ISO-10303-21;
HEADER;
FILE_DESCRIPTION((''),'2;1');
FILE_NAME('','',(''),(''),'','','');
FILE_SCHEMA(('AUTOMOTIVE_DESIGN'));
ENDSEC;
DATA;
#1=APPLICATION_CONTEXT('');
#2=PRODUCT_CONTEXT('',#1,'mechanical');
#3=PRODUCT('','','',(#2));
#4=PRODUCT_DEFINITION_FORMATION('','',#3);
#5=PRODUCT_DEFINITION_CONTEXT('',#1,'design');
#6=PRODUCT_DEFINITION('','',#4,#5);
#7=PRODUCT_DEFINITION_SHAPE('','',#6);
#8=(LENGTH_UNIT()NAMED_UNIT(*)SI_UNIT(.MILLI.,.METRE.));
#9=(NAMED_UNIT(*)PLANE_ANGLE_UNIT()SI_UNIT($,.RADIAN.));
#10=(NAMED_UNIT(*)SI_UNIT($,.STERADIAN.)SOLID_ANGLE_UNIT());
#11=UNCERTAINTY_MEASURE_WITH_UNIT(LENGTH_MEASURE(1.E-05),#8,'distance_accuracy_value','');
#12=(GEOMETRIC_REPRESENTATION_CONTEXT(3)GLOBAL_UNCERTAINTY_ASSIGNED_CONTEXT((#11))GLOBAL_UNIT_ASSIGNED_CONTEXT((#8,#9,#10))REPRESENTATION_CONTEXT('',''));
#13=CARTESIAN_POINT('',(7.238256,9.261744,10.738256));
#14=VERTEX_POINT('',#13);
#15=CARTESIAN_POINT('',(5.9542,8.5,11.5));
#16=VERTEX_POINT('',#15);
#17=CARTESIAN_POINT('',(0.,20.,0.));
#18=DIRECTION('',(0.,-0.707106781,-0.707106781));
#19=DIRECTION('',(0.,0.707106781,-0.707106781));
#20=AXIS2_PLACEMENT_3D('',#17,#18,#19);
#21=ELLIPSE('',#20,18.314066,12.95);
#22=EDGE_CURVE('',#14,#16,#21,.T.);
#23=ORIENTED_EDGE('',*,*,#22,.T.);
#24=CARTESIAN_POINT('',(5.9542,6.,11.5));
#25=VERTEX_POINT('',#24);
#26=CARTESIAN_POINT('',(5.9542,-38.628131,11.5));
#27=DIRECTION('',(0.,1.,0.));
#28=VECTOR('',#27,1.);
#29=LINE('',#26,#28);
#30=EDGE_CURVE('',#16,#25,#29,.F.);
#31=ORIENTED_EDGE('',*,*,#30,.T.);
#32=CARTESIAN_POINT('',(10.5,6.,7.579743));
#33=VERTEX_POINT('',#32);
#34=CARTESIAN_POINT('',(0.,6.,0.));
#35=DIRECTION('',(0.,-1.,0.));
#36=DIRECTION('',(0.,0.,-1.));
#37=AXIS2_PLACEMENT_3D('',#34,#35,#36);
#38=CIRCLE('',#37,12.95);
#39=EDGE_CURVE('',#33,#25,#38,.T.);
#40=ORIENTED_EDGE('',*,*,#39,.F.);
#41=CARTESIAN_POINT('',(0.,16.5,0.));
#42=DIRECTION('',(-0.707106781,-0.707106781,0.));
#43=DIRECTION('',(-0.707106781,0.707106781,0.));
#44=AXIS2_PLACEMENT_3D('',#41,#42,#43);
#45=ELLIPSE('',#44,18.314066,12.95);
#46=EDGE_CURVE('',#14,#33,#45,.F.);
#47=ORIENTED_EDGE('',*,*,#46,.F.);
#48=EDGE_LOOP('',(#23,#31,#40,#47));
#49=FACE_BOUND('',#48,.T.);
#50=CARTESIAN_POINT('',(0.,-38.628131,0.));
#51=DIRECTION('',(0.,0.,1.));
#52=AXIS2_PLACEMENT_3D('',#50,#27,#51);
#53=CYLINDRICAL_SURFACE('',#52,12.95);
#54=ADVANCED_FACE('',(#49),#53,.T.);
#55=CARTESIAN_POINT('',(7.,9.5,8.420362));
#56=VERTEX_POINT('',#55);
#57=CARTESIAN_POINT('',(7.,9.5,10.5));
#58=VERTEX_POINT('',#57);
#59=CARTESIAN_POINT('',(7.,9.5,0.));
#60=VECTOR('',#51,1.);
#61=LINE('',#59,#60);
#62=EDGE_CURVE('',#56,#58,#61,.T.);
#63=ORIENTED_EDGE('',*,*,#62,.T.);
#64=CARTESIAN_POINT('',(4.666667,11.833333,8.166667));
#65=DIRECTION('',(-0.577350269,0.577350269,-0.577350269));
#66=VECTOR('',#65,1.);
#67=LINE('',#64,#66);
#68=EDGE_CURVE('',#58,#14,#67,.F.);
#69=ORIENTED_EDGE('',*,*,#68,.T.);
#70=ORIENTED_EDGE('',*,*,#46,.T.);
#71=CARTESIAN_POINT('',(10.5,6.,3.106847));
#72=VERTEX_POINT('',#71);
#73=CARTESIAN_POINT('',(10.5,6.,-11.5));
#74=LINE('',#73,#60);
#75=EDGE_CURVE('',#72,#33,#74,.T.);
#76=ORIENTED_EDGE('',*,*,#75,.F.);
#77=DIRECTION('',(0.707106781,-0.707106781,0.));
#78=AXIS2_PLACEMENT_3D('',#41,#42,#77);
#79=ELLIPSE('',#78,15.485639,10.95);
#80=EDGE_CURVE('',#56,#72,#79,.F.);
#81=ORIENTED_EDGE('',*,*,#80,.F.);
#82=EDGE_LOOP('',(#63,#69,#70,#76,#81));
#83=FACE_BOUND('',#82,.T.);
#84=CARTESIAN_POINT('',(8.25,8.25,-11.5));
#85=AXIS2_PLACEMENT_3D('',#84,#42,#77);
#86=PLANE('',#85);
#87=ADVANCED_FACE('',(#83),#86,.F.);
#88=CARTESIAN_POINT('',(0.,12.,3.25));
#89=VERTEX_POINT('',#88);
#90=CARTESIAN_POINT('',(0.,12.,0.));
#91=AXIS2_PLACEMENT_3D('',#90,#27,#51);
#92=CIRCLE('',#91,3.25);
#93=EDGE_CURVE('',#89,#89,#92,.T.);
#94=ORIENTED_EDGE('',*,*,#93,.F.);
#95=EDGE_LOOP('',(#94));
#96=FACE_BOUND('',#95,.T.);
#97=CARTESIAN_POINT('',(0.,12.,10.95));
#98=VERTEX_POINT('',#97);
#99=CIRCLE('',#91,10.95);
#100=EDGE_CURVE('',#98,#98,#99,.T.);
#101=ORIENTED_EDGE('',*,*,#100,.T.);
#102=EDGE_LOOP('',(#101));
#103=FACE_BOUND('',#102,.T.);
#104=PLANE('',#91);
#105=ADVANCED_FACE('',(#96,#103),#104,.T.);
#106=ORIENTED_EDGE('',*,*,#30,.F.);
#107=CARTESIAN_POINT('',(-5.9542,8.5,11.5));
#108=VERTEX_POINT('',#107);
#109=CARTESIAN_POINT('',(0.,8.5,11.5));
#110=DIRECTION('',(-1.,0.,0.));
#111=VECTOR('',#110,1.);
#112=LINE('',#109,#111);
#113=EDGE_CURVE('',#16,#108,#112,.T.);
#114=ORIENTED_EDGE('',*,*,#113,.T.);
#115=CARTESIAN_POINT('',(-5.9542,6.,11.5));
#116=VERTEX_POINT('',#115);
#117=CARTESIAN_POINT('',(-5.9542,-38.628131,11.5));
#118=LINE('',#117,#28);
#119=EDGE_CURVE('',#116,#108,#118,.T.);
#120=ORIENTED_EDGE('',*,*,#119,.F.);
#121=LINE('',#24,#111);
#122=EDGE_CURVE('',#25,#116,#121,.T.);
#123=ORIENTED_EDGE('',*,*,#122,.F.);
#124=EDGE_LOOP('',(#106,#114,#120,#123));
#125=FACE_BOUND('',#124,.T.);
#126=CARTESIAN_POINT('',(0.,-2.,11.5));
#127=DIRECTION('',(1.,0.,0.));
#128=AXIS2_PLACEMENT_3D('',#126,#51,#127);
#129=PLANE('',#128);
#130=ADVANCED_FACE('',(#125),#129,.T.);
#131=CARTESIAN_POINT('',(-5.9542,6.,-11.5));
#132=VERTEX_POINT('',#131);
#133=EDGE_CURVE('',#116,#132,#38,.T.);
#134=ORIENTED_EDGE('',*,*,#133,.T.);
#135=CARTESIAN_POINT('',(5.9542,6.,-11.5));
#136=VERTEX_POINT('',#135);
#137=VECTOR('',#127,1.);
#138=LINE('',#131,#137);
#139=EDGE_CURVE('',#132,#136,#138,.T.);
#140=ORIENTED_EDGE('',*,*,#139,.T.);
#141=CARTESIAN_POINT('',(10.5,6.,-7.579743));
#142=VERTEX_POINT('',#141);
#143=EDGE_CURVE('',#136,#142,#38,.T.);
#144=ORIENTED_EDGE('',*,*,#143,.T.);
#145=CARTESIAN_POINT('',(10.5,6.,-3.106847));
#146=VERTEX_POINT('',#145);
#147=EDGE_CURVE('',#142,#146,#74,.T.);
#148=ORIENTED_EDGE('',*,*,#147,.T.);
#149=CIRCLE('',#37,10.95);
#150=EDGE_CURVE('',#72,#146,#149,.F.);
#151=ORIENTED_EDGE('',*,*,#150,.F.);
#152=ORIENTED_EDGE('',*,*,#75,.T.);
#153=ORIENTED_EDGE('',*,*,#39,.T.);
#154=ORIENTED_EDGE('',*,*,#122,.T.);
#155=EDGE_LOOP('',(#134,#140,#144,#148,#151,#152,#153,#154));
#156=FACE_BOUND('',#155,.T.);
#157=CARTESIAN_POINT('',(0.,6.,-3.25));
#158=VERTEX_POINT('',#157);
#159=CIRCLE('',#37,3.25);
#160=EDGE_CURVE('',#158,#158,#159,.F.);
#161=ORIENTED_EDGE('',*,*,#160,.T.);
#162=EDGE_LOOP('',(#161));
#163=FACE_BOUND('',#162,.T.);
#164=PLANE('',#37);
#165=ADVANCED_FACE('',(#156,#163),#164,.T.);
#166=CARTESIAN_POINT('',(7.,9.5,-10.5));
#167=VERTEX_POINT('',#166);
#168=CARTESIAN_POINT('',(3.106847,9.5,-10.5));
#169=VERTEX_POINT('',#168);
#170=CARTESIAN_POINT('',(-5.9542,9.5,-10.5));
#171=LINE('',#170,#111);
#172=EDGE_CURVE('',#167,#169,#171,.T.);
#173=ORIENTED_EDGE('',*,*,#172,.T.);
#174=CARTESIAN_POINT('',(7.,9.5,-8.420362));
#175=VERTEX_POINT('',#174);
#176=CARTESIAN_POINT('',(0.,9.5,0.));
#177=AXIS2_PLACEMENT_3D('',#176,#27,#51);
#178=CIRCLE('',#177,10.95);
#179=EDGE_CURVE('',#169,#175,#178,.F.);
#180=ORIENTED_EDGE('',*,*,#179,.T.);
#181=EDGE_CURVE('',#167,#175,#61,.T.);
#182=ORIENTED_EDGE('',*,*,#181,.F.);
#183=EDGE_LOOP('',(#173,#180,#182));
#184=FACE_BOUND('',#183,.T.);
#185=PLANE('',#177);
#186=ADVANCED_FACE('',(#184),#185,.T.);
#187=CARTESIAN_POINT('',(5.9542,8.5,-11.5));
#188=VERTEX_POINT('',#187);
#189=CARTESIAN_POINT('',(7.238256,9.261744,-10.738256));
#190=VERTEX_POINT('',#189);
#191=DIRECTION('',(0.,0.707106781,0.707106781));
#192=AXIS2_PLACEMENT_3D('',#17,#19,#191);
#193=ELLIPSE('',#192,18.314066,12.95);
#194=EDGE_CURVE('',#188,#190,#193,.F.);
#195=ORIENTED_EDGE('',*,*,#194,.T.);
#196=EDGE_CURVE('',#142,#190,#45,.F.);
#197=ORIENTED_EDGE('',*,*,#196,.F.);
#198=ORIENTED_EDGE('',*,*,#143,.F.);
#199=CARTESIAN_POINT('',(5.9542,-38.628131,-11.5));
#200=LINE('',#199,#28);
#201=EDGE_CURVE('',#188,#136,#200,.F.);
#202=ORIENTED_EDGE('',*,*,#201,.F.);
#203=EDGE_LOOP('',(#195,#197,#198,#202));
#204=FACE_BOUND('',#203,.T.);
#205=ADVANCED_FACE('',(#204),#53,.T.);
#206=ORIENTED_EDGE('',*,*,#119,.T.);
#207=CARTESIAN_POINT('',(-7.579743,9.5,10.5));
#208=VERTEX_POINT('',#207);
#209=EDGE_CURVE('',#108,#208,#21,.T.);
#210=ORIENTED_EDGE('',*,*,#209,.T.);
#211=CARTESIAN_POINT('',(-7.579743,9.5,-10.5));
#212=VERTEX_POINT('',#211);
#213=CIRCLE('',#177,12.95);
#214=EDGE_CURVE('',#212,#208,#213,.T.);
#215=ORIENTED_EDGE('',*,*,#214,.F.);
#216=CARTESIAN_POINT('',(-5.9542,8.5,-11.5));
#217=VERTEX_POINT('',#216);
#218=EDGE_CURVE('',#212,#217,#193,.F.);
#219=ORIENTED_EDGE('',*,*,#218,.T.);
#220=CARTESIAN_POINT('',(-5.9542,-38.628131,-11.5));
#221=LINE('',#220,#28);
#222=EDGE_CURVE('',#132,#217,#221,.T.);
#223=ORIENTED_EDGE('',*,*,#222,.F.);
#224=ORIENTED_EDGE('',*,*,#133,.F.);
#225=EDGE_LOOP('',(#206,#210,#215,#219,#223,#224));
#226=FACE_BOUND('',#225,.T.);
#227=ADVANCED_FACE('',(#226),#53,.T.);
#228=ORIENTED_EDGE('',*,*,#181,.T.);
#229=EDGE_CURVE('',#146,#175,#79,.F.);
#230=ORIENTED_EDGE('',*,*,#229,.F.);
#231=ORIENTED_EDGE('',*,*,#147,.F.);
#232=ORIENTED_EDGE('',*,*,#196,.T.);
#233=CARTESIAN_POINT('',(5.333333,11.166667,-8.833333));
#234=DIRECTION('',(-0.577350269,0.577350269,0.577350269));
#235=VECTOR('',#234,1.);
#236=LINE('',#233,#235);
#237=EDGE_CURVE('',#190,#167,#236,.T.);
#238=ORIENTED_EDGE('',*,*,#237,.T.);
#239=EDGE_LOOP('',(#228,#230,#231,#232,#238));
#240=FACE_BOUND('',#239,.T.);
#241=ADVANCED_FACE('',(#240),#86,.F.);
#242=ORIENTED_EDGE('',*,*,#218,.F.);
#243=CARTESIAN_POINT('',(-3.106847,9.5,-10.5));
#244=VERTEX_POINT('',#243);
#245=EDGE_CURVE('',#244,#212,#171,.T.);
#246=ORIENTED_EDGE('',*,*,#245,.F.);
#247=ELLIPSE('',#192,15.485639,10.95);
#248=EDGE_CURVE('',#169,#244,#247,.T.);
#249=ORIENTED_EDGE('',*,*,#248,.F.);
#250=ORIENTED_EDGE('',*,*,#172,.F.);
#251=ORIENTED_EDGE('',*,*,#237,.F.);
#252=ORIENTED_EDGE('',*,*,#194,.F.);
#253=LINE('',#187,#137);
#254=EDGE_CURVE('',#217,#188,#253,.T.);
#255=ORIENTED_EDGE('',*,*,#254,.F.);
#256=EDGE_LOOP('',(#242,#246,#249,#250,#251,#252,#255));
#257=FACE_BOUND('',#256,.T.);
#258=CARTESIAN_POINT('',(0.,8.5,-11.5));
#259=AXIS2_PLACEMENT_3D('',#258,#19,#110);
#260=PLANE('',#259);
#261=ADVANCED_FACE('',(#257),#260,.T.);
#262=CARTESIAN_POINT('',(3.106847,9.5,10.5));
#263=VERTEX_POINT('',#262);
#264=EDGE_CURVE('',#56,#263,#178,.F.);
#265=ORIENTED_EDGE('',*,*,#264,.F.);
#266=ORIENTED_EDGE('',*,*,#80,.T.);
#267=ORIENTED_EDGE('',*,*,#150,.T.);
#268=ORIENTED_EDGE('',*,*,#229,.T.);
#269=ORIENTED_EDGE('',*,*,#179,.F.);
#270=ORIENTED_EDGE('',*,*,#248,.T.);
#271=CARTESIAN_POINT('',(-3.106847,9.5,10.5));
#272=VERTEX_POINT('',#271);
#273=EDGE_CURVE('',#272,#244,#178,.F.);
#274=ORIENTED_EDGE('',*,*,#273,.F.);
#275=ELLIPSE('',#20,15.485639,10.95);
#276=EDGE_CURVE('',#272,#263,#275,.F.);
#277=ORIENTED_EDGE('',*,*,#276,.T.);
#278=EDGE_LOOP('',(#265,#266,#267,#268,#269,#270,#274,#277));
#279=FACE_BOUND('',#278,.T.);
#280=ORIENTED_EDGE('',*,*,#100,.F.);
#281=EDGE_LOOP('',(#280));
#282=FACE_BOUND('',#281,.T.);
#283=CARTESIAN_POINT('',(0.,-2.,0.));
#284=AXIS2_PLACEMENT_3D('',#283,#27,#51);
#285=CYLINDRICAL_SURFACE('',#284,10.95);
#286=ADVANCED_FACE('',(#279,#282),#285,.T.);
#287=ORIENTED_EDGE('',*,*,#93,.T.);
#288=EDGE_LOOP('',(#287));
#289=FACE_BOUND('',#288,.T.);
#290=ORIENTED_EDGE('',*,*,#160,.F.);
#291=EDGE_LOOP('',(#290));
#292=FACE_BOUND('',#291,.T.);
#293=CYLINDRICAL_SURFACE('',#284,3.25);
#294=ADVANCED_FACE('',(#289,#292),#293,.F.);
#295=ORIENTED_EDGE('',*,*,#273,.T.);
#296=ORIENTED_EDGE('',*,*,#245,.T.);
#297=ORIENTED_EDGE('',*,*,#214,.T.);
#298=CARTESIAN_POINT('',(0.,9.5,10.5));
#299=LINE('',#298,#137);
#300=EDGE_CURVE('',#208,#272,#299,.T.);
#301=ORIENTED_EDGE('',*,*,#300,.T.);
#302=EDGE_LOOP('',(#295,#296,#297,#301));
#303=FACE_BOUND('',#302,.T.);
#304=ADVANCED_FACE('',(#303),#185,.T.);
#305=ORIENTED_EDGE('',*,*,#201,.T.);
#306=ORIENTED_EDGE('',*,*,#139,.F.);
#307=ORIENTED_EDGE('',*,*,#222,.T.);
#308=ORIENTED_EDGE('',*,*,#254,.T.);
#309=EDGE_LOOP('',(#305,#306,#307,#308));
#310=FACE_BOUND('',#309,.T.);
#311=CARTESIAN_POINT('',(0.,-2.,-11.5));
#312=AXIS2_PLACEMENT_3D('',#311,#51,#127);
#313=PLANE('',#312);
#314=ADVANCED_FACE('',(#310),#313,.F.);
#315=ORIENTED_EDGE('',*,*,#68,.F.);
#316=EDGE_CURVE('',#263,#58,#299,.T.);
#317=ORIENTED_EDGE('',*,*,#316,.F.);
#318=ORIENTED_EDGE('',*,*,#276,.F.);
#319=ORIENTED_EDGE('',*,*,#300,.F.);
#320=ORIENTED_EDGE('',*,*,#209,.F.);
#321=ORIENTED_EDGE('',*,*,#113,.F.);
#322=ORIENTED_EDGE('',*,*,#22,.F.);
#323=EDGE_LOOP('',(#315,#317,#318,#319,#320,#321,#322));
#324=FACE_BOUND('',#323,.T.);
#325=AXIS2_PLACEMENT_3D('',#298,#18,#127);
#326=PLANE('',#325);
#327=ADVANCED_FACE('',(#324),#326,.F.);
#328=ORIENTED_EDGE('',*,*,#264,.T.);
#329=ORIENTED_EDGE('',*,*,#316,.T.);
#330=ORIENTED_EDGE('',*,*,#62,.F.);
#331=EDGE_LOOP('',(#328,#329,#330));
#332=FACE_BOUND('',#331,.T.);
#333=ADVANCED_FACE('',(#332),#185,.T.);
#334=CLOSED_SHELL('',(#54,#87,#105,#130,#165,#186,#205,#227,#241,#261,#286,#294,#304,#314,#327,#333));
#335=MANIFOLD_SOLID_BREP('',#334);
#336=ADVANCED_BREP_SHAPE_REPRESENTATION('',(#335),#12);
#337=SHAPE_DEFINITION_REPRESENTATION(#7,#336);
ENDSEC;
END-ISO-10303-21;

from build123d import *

# Parameters (mm, degrees)
SKETCH1_R               = 10.95
SKETCH1_R_2             = 6.05
BOSS_EXTRUDE1_DEPTH     = 2
BOSS_EXTRUDE2_START     = 12
SKETCH1_3_R             = 10.95
SKETCH1_3_R_2           = 6.05
BOSS_EXTRUDE2_DEPTH     = 12
BOSS_EXTRUDE3_START     = -2.5
SKETCH2_R               = 12.95
SKETCH2_R_2             = 10.95
BOSS_EXTRUDE3_DEPTH     = 11.5
CUT_EXTRUDE1_DEPTH      = 22.895319134
CUT_EXTRUDE1_DEPTH_BACK = 22.895319134
SKETCH3_W               = 100
SKETCH3_H               = 23
CUT_EXTRUDE3_DEPTH      = 22.07018035
CUT_EXTRUDE3_DEPTH_BACK = 22.07018035
BOSS_EXTRUDE4_START     = 12
SKETCH1_5_R             = 10.95
SKETCH1_5_R_2           = 6.05
BOSS_EXTRUDE4_DEPTH     = 12
CHAMFER1_SIZE           = 1
BOSS_EXTRUDE5_START     = 12
SKETCH7_R               = 6.05
BOSS_EXTRUDE5_DEPTH     = 12
CUT_EXTRUDE5_DEPTH      = 22.07018035
CUT_EXTRUDE5_DEPTH_BACK = 22.07018035
SKETCH6_R               = 3.25
CUT_EXTRUDE7_START      = -8
CUT_EXTRUDE7_DEPTH      = 8


with BuildPart() as part:
    # Sketch1 → Boss-Extrude1 (new body)
    # profile 1 of 2: a face of its own
    with BuildSketch(Plane(origin=(0, 0, 0), x_dir=(1, 0, 0), z_dir=(0, 1, 0))):
        with Locations(Location((0, 0, 0), (0, 0, 270))):
            Circle(SKETCH1_R)
        Circle(SKETCH1_R_2, mode=Mode.SUBTRACT)
    # profile 2 of 2: a face of its own
    with BuildSketch(Plane(origin=(0, 0, 0), x_dir=(1, 0, 0), z_dir=(0, 1, 0))):
        Circle(SKETCH1_R_2)
    extrude(amount=-BOSS_EXTRUDE1_DEPTH)

    # Sketch1<3> → Boss-Extrude2 (add)
    with BuildSketch(Plane(origin=(0, 0, 0), x_dir=(1, 0, 0), z_dir=(0, 1, 0)).offset(BOSS_EXTRUDE2_START)):
        with Locations(Location((0, 0, 0), (0, 0, 270))):
            Circle(SKETCH1_3_R)
        with Locations(Location((0, 0, 0), (0, 0, 270))):
            Circle(SKETCH1_3_R_2, mode=Mode.SUBTRACT)
    extrude(amount=-BOSS_EXTRUDE2_DEPTH)

    # Sketch2 → Boss-Extrude3 (add)
    with BuildSketch(Plane(origin=(0, 12, 0), x_dir=(1, 0, 0), z_dir=(0, 1, 0)).offset(BOSS_EXTRUDE3_START)):
        with Locations(Location((0, 0, 0), (0, 0, 270))):
            Circle(SKETCH2_R)
        with Locations(Location((0, 0, 0), (0, 0, 270))):
            Circle(SKETCH2_R_2, mode=Mode.SUBTRACT)
    extrude(amount=-BOSS_EXTRUDE3_DEPTH)

    # Sketch3 → Cut-Extrude1 (cut, two sides: drawn at the far end of the back side and taken through both)
    with BuildSketch(Plane(origin=(0, 0, 0), x_dir=(1, 0, 0), z_dir=(0, 1, 0)).offset(-CUT_EXTRUDE1_DEPTH_BACK)):
        with Locations((0, -23)):
            Rectangle(SKETCH3_W, SKETCH3_H)
        with Locations((0, 23)):
            Rectangle(SKETCH3_W, SKETCH3_H)
    extrude(amount=CUT_EXTRUDE1_DEPTH + CUT_EXTRUDE1_DEPTH_BACK, mode=Mode.SUBTRACT)

    # Sketch4 → Cut-Extrude3 (cut, two sides: drawn at the far end of the back side and taken through both)
    with BuildSketch(Plane.XY.offset(-CUT_EXTRUDE3_DEPTH_BACK)):
        Polygon((13, 12), (4.5, 12), (13, 3.5), align=None)
    extrude(amount=CUT_EXTRUDE3_DEPTH + CUT_EXTRUDE3_DEPTH_BACK, mode=Mode.SUBTRACT)

    # Sketch1<5> → Boss-Extrude4 (add)
    with BuildSketch(Plane(origin=(0, 0, 0), x_dir=(1, 0, 0), z_dir=(0, 1, 0)).offset(BOSS_EXTRUDE4_START)):
        with Locations(Location((0, 0, 0), (0, 0, 270))):
            Circle(SKETCH1_5_R)
        with Locations(Location((0, 0, 0), (0, 0, 270))):
            Circle(SKETCH1_5_R_2, mode=Mode.SUBTRACT)
    extrude(amount=-BOSS_EXTRUDE4_DEPTH)

    # Chamfer1
    # the kernel refuses this chamfer: 1 mm, written as the material it takes off along each edge
    with BuildSketch(Plane(origin=(8.525883186, 9.5, 11.5), x_dir=(0, 0.027495876610585647, -0.9996219169112968), z_dir=(-1, 0, 0))) as chamfer1_piece_1_section:
        Polygon((CHAMFER1_SIZE * 0.999621916911, CHAMFER1_SIZE * 0.0274958766106), (-CHAMFER1_SIZE * 0.0274958766106, CHAMFER1_SIZE * 0.999621916911), (0, 0), align=None)
    chamfer1_piece_1 = extrude(amount=17.051766372, mode=Mode.PRIVATE)
    chamfer1_piece_1 = chamfer1_piece_1 - Plane(origin=(0, 9.159933663, 0), x_dir=(0, 0, 1), z_dir=(0, 1, 0)) * Cylinder(10.95, 39, mode=Mode.PRIVATE)
    add(chamfer1_piece_1, mode=Mode.SUBTRACT)
    with BuildSketch(Plane(origin=(8.525883186, 9.5, -11.5), x_dir=(0, 0.027495876610585647, 0.9996219169112968), z_dir=(-1, 0, 0))) as chamfer1_piece_2_section:
        Polygon((CHAMFER1_SIZE * 0.999621916911, -CHAMFER1_SIZE * 0.0274958766106), (-CHAMFER1_SIZE * 0.0274958766106, -CHAMFER1_SIZE * 0.999621916911), (0, 0), align=None)
    chamfer1_piece_2 = extrude(amount=17.051766372, mode=Mode.PRIVATE)
    chamfer1_piece_2 = chamfer1_piece_2 - Plane(origin=(0, 9.159933662, 0), x_dir=(0, 0, 1), z_dir=(0, 1, 0)) * Cylinder(10.95, 39, mode=Mode.PRIVATE)
    add(chamfer1_piece_2, mode=Mode.SUBTRACT)

    # Sketch7 → Boss-Extrude5 (add)
    with BuildSketch(Plane(origin=(0, 0, 0), x_dir=(1, 0, 0), z_dir=(0, 1, 0)).offset(BOSS_EXTRUDE5_START)):
        Circle(SKETCH7_R)
    extrude(amount=-BOSS_EXTRUDE5_DEPTH)

    # Sketch6 → Cut-Extrude5 (cut, two sides: drawn at the far end of the back side and taken through both)
    with BuildSketch(Plane(origin=(0, 0, 0), x_dir=(1, 0, 0), z_dir=(0, 1, 0)).offset(-CUT_EXTRUDE5_DEPTH_BACK)):
        with Locations(Location((0, 0, 0), (0, 0, 270))):
            Circle(SKETCH6_R)
    extrude(amount=CUT_EXTRUDE5_DEPTH + CUT_EXTRUDE5_DEPTH_BACK, mode=Mode.SUBTRACT)

    # Sketch9 → Cut-Extrude7 (cut)
    with BuildSketch(Plane.XZ.offset(2).offset(CUT_EXTRUDE7_START)):
        with BuildLine():
            Line((5.954200198, 11.5), (-5.954200198, 11.5))
            ThreePointArc((-5.954200198, 11.5), (-12.95, 0), (-5.954200198, -11.5))
            Line((-5.954200198, -11.5), (5.954200198, -11.5))
            ThreePointArc((5.954200198, -11.5), (12.95, 0), (5.954200198, 11.5))
        make_face()
    extrude(amount=CUT_EXTRUDE7_DEPTH, mode=Mode.SUBTRACT)


solid = part.part
